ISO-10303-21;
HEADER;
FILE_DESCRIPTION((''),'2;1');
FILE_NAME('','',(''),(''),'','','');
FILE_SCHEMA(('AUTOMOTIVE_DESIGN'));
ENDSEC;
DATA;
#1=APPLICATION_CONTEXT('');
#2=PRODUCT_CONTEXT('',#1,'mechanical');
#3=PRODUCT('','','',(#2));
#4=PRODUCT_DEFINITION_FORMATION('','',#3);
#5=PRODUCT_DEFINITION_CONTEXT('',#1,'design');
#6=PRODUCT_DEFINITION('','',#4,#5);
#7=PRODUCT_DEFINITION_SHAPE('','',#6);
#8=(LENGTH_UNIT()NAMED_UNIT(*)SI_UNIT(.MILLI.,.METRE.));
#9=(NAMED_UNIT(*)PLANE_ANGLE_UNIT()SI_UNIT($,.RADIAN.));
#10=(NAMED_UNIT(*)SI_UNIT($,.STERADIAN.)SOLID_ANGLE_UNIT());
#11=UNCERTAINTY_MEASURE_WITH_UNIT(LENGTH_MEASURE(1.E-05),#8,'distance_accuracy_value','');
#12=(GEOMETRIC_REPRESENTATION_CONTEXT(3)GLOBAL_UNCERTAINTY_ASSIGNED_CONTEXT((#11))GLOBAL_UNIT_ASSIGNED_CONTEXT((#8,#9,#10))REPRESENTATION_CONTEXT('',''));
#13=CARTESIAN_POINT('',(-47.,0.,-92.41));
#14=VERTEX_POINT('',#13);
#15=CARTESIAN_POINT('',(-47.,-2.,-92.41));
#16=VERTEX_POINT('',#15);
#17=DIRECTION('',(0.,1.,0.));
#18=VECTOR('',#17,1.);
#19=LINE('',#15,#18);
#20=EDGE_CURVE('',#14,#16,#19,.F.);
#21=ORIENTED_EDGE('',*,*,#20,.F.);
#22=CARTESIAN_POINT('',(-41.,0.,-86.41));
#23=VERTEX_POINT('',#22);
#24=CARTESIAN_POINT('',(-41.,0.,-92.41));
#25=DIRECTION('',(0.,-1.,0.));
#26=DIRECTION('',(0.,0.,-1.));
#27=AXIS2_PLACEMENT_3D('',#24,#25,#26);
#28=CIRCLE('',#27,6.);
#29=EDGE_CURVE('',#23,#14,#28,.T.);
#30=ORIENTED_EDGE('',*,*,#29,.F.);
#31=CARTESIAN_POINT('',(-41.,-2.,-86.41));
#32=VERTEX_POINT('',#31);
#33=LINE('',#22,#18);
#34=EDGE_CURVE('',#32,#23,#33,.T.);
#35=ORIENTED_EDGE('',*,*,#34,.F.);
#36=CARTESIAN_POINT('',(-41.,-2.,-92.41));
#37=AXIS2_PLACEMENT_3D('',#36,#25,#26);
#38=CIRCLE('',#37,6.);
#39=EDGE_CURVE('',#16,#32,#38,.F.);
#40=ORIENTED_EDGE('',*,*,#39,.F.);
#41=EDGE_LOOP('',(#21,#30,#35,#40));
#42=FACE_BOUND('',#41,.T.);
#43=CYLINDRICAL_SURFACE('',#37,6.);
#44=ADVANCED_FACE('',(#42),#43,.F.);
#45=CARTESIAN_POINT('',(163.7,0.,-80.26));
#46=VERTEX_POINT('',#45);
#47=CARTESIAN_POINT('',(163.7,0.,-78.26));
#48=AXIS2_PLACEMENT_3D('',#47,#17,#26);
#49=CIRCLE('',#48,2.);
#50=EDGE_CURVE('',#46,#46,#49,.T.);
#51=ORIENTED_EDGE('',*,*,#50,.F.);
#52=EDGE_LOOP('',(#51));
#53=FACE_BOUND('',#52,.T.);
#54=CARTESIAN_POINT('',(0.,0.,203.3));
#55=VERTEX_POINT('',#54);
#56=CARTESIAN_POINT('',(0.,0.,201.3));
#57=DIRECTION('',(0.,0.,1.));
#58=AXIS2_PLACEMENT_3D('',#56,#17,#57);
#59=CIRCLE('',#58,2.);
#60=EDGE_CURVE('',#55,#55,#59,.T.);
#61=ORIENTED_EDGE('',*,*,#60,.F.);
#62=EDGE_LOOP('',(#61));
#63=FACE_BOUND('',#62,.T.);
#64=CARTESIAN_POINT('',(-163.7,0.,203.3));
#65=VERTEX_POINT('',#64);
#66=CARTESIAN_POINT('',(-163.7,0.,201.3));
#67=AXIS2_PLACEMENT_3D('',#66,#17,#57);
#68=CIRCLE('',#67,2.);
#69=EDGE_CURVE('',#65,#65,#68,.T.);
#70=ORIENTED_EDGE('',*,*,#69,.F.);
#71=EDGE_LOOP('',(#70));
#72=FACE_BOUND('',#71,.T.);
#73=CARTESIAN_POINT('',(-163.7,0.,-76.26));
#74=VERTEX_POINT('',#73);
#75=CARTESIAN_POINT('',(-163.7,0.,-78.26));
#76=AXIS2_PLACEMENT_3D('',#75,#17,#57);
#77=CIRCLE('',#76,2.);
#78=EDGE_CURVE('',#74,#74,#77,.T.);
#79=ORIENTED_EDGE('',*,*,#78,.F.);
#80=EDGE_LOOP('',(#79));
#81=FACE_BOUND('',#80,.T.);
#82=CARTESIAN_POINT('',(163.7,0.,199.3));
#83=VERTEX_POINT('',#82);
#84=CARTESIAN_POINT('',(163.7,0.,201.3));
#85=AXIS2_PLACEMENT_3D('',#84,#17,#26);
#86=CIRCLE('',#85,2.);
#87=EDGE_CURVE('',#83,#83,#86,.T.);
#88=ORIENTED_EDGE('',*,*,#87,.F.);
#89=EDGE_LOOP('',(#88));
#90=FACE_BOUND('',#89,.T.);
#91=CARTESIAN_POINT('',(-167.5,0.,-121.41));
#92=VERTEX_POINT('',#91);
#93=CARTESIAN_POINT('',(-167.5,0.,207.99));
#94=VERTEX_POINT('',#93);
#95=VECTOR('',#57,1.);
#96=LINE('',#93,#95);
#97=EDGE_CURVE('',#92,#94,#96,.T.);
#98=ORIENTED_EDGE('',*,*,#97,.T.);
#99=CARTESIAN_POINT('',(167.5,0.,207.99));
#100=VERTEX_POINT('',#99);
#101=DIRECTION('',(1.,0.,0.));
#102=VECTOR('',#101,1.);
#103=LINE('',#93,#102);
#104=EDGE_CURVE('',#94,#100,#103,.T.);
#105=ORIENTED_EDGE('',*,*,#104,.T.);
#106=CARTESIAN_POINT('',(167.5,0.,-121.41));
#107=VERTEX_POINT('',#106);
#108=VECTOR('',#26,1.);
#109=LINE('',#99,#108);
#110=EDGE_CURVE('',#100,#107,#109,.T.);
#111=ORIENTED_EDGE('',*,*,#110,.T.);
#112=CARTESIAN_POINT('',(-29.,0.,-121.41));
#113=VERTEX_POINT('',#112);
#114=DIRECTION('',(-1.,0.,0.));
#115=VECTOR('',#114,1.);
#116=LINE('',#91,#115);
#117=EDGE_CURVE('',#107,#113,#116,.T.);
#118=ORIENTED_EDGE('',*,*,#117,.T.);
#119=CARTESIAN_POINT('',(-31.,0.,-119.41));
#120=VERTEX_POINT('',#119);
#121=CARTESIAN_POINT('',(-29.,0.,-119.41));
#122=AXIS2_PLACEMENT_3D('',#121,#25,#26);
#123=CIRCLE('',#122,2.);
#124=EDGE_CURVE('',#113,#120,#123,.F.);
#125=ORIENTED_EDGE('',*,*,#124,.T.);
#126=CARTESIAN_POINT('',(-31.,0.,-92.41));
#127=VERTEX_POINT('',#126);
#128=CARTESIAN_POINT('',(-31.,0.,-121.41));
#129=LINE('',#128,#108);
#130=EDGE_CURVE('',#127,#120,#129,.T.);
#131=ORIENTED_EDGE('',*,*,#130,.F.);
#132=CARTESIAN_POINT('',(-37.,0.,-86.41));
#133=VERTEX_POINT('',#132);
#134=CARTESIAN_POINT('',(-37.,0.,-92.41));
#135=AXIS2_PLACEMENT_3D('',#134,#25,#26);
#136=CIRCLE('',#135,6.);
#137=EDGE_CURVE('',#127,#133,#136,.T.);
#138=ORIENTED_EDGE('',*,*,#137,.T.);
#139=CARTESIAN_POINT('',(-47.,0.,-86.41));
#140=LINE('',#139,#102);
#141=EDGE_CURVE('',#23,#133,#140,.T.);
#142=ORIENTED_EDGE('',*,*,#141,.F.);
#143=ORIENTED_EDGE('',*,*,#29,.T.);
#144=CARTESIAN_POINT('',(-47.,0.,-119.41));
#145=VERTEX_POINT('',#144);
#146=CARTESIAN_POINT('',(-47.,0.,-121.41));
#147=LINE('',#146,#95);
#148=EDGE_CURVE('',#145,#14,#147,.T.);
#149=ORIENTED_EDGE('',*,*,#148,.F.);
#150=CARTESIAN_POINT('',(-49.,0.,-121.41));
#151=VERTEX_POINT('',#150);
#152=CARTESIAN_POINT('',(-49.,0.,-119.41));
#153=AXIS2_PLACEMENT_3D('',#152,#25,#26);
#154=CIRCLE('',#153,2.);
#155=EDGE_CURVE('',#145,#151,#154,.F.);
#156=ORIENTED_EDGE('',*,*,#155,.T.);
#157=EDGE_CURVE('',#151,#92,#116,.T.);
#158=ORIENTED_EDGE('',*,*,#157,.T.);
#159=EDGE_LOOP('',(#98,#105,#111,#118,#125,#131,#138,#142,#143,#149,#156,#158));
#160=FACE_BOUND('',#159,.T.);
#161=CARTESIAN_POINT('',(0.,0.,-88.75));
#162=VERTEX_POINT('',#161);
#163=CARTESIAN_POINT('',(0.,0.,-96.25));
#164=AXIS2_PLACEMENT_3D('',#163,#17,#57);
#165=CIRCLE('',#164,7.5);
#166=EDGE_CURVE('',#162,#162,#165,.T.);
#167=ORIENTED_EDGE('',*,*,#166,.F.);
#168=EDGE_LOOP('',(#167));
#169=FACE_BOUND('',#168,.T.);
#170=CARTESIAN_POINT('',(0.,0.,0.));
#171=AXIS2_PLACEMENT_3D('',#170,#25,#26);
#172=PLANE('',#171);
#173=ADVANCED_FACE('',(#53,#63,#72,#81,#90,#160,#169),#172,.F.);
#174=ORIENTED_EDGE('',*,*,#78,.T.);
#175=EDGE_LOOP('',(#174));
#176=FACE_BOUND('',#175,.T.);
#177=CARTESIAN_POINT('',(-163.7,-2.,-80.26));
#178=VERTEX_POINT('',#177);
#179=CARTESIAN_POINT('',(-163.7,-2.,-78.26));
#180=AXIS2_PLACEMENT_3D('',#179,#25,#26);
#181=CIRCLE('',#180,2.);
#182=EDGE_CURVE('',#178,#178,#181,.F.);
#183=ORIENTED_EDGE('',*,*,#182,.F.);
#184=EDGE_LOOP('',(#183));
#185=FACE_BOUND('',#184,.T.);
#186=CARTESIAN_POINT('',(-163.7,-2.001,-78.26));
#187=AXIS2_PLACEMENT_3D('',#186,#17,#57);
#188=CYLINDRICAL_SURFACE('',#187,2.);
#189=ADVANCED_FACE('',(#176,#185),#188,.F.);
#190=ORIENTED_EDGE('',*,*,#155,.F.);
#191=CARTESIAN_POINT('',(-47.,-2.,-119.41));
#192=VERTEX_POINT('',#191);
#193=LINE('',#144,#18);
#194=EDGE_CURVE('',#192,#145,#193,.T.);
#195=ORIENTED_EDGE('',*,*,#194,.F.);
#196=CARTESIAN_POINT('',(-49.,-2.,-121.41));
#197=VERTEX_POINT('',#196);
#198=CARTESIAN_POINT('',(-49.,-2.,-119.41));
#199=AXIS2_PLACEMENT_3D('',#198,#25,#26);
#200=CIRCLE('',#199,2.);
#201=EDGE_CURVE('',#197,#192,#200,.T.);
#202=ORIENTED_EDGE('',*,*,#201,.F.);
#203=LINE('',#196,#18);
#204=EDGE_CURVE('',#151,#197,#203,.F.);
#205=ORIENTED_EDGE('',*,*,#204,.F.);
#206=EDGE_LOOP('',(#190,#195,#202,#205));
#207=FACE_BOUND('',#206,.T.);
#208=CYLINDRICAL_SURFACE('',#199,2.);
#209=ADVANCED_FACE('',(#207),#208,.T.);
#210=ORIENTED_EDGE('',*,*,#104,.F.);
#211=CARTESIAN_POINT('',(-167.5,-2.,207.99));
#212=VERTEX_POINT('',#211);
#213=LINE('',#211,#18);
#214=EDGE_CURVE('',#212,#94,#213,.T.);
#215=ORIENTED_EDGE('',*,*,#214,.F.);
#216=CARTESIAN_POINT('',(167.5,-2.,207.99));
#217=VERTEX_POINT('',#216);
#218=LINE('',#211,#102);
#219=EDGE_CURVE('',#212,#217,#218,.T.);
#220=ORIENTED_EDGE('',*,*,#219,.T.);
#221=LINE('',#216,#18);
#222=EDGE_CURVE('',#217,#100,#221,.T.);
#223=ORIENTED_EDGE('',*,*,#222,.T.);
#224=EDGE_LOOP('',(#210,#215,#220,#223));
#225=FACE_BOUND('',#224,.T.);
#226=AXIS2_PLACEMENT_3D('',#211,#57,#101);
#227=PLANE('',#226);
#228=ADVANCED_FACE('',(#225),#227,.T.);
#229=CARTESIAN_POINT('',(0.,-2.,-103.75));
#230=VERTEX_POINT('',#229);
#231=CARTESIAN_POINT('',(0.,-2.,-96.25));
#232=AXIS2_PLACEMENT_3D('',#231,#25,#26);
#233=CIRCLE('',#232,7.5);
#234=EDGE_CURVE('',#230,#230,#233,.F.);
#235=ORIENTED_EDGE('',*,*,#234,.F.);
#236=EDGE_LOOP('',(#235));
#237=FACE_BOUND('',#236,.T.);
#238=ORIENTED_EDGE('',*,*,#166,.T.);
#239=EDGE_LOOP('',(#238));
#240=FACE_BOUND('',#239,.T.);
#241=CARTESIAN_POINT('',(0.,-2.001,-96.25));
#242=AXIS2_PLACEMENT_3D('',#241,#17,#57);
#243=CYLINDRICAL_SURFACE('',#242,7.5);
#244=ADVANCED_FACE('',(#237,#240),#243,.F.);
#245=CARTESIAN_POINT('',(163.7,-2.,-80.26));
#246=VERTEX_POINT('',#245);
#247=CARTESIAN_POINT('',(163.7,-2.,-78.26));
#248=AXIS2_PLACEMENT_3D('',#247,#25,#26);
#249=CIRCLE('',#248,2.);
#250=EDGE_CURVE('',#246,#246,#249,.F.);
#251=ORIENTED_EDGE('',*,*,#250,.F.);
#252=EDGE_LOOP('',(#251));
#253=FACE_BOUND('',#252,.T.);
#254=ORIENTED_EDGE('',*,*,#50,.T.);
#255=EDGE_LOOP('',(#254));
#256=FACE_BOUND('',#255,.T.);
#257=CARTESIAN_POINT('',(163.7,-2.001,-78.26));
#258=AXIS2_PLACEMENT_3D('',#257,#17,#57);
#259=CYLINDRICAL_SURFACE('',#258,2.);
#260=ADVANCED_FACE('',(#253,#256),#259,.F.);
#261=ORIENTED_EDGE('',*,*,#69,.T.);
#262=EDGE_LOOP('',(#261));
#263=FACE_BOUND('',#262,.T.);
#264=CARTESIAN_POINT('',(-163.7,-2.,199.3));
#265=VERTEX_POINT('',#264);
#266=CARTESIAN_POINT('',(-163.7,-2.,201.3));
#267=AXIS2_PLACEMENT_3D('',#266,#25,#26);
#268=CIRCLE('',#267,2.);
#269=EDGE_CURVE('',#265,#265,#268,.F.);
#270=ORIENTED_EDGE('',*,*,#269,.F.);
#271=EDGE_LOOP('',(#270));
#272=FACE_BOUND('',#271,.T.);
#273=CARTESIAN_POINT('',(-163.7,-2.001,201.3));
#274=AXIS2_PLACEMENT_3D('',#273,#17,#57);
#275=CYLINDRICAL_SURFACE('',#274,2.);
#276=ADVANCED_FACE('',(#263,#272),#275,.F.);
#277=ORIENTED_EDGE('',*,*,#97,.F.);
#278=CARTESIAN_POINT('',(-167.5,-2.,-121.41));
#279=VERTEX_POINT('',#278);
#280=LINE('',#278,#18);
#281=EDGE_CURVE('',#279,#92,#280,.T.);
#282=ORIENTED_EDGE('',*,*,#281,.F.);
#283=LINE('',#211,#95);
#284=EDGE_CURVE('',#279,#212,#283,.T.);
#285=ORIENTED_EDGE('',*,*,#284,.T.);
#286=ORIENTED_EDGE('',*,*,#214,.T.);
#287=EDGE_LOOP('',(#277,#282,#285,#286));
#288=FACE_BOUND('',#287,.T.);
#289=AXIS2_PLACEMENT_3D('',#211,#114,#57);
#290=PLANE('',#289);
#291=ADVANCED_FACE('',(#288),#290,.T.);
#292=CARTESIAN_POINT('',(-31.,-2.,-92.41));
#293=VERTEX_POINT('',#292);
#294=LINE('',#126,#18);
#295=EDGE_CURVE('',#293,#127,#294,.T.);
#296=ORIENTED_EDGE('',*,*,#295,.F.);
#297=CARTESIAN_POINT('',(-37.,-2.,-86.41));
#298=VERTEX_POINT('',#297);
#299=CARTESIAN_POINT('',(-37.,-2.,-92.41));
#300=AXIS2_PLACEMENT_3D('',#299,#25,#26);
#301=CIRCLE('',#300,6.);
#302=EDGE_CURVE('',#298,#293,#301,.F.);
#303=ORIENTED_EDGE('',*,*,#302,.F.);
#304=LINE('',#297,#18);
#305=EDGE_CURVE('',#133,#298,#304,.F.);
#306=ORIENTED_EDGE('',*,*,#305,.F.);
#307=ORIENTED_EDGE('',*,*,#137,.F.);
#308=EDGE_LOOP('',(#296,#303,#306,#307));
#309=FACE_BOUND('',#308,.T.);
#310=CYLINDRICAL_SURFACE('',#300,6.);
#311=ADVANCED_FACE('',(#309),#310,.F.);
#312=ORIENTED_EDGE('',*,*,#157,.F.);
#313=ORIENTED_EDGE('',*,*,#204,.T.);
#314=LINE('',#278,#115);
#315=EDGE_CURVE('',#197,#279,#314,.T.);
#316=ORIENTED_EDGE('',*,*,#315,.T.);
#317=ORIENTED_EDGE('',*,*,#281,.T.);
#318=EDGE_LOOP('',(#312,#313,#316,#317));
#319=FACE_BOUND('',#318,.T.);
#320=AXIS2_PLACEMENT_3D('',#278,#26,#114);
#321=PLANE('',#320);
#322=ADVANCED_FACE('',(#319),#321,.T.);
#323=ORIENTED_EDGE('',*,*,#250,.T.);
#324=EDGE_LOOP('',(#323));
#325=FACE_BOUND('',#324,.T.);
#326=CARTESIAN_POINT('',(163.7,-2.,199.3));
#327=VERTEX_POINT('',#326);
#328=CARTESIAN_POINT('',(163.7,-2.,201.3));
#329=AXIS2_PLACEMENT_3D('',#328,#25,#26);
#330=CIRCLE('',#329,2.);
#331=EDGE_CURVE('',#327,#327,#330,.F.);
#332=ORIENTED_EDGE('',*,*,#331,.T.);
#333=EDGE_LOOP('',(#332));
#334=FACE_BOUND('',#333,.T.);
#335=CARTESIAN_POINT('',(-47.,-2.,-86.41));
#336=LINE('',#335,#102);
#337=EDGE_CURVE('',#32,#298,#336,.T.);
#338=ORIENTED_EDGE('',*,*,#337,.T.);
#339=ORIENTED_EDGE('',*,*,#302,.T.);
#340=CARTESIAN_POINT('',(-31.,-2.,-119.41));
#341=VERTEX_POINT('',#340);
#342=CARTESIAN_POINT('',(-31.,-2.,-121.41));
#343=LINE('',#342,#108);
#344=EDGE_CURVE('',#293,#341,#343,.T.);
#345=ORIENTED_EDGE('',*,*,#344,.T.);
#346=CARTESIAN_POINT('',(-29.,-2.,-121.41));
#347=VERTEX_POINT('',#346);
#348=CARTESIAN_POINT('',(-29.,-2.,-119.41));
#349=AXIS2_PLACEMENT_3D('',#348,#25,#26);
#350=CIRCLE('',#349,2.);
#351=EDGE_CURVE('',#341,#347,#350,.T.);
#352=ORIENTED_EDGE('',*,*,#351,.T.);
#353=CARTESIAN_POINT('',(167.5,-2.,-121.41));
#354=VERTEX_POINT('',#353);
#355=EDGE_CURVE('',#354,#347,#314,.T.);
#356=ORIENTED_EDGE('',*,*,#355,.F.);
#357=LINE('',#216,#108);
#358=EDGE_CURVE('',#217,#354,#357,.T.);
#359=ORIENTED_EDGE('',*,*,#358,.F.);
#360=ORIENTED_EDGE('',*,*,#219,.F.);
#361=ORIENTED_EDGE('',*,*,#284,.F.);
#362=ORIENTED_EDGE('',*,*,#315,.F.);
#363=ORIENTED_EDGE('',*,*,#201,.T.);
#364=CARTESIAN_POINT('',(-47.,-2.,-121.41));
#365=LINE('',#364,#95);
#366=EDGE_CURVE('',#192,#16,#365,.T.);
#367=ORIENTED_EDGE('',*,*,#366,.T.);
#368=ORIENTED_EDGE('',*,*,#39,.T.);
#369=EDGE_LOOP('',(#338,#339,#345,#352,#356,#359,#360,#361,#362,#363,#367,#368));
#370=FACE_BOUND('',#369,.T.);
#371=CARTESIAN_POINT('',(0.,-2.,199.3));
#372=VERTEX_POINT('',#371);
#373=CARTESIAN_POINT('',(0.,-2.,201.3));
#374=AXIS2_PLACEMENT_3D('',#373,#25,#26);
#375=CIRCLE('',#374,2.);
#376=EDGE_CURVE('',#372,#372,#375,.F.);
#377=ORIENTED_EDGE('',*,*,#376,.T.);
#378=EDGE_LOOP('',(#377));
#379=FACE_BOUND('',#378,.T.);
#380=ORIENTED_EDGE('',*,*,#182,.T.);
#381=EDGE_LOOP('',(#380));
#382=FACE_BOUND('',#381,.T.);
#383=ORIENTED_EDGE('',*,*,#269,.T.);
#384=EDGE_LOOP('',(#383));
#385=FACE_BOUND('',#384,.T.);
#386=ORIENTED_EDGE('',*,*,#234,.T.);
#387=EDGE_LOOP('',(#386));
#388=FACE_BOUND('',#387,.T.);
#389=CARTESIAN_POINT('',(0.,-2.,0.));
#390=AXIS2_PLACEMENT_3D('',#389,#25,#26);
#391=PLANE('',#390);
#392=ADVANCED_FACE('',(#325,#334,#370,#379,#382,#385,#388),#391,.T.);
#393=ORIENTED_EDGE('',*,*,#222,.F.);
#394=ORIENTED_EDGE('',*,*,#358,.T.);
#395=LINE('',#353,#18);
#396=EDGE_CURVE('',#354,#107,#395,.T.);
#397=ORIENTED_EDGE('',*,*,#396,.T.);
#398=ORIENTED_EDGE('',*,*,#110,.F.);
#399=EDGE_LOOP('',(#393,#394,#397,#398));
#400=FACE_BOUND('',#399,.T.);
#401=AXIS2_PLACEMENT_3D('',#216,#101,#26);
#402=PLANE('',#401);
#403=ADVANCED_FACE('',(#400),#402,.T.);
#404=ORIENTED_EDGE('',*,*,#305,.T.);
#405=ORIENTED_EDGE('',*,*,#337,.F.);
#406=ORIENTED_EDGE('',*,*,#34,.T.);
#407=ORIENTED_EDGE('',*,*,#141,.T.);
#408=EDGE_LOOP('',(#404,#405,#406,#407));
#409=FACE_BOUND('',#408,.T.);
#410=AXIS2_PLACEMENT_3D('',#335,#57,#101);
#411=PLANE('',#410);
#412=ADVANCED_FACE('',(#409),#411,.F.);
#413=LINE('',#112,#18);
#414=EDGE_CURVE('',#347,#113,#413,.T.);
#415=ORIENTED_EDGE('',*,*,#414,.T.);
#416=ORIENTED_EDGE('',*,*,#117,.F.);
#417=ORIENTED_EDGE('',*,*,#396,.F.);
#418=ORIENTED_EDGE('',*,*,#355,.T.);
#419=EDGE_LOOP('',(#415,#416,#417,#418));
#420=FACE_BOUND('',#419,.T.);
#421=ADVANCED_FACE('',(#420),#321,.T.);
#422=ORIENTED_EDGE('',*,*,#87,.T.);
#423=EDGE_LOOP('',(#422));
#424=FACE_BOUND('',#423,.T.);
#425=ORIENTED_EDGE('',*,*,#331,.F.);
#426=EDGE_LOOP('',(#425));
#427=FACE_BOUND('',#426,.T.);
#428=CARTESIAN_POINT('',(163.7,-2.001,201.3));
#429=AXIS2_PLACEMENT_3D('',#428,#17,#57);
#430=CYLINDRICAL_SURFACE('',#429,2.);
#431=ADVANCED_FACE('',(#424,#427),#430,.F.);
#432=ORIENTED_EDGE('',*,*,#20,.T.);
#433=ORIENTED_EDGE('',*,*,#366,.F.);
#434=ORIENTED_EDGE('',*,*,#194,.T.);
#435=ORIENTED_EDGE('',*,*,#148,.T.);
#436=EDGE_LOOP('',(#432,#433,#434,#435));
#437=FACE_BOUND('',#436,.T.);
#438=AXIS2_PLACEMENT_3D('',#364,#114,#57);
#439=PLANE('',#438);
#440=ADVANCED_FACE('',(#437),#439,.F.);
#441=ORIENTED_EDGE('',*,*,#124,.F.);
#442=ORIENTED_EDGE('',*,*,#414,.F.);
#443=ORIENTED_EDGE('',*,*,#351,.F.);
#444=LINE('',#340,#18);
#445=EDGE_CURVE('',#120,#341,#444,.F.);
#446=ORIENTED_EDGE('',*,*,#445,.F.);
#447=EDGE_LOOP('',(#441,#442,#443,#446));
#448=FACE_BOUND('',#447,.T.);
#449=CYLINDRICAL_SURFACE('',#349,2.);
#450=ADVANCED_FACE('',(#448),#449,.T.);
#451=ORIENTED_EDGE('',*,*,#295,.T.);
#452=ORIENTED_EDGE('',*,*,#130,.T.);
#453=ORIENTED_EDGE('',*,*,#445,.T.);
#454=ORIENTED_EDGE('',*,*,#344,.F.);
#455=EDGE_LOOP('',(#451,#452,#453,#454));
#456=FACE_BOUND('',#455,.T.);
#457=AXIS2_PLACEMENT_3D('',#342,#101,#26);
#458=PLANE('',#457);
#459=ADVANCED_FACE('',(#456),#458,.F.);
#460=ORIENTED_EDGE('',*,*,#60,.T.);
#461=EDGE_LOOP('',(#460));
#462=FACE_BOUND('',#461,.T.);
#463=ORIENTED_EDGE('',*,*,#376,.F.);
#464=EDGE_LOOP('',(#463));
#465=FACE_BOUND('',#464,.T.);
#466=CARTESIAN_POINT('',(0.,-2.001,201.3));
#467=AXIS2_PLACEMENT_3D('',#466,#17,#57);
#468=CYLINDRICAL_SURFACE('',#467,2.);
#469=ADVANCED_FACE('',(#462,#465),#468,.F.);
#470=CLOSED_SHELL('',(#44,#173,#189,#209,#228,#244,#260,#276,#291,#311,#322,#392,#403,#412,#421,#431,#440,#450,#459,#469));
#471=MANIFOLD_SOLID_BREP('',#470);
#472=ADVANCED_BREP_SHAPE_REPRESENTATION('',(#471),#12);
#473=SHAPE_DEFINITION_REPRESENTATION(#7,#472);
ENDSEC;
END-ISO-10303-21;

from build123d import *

# Parameters (mm, degrees)
CROQUIS12_W           = 335
CROQUIS12_H           = 329.4
BRIDA_BASE2_DEPTH     = 2
CORTAR_EXTRUIR6_REACH = 269.058
CROQUIS27_R           = 2
CORTAR_EXTRUIR7_REACH = 269.058
CROQUIS28_R           = 7.5
CROQUIS29_W           = 16
CROQUIS29_H           = 35
CORTAR_EXTRUIR8_DEPTH = 268.058214815
REDONDEO1_R           = 6
REDONDEO2_R           = 2


# Sheet-metal steps are written as plain solids
with BuildPart() as part:
    # Croquis12 → Brida base2 (new body)
    with BuildSketch(Plane(origin=(0, 0, 0), x_dir=(1, 0, 0), z_dir=(0, 1, 0))):
        with Locations((0, -43.29)):
            Rectangle(CROQUIS12_W, CROQUIS12_H)
    extrude(amount=-BRIDA_BASE2_DEPTH)

    # Croquis27 → Cortar-Extruir6 (cut, up to next)
    with BuildSketch(Plane(origin=(0, 0, 0), x_dir=(1, 0, 0), z_dir=(0, 1, 0)), mode=Mode.PRIVATE) as cortar_extruir6_sk1:
        with Locations(Location((-163.7, -201.3, 0), (0, 0, 270))):
            Circle(CROQUIS27_R)
    cortar_extruir6_tool1 = extrude(cortar_extruir6_sk1.sketch, amount=-CORTAR_EXTRUIR6_REACH, mode=Mode.PRIVATE) & part.part
    # Croquis27 → Cortar-Extruir6 (cut, up to next)
    with BuildSketch(Plane(origin=(0, 0, 0), x_dir=(1, 0, 0), z_dir=(0, 1, 0)), mode=Mode.PRIVATE) as cortar_extruir6_sk2:
        with Locations(Location((-163.7, 78.26, 0), (0, 0, 270))):
            Circle(CROQUIS27_R)
    cortar_extruir6_tool2 = extrude(cortar_extruir6_sk2.sketch, amount=-CORTAR_EXTRUIR6_REACH, mode=Mode.PRIVATE) & part.part
    # Croquis27 → Cortar-Extruir6 (cut, up to next)
    with BuildSketch(Plane(origin=(0, 0, 0), x_dir=(1, 0, 0), z_dir=(0, 1, 0)), mode=Mode.PRIVATE) as cortar_extruir6_sk3:
        with Locations(Location((163.7, 78.26, 0), (0, 0, 90))):
            Circle(CROQUIS27_R)
    cortar_extruir6_tool3 = extrude(cortar_extruir6_sk3.sketch, amount=-CORTAR_EXTRUIR6_REACH, mode=Mode.PRIVATE) & part.part
    # Croquis27 → Cortar-Extruir6 (cut, up to next)
    with BuildSketch(Plane(origin=(0, 0, 0), x_dir=(1, 0, 0), z_dir=(0, 1, 0)), mode=Mode.PRIVATE) as cortar_extruir6_sk4:
        with Locations(Location((163.7, -201.3, 0), (0, 0, 90))):
            Circle(CROQUIS27_R)
    cortar_extruir6_tool4 = extrude(cortar_extruir6_sk4.sketch, amount=-CORTAR_EXTRUIR6_REACH, mode=Mode.PRIVATE) & part.part
    # Croquis27 → Cortar-Extruir6 (cut, up to next)
    with BuildSketch(Plane(origin=(0, 0, 0), x_dir=(1, 0, 0), z_dir=(0, 1, 0)), mode=Mode.PRIVATE) as cortar_extruir6_sk5:
        with Locations(Location((0, -201.3, 0), (0, 0, 270))):
            Circle(CROQUIS27_R)
    cortar_extruir6_tool5 = extrude(cortar_extruir6_sk5.sketch, amount=-CORTAR_EXTRUIR6_REACH, mode=Mode.PRIVATE) & part.part
    add(cortar_extruir6_tool1.solids().sort_by_distance((-163.7, 0, 201.3))[0], mode=Mode.SUBTRACT)
    add(cortar_extruir6_tool2.solids().sort_by_distance((-163.7, 0, -78.26))[0], mode=Mode.SUBTRACT)
    add(cortar_extruir6_tool3.solids().sort_by_distance((163.7, 0, -78.26))[0], mode=Mode.SUBTRACT)
    add(cortar_extruir6_tool4.solids().sort_by_distance((163.7, 0, 201.3))[0], mode=Mode.SUBTRACT)
    add(cortar_extruir6_tool5.solids().sort_by_distance((0, 0, 201.3))[0], mode=Mode.SUBTRACT)

    # Croquis28 → Cortar-Extruir7 (cut, up to next)
    with BuildSketch(Plane(origin=(0, 0, 0), x_dir=(1, 0, 0), z_dir=(0, 1, 0)), mode=Mode.PRIVATE) as cortar_extruir7_sk1:
        with Locations(Location((0, 96.25, 0), (0, 0, 270))):
            Circle(CROQUIS28_R)
    cortar_extruir7_tool1 = extrude(cortar_extruir7_sk1.sketch, amount=-CORTAR_EXTRUIR7_REACH, mode=Mode.PRIVATE) & part.part
    add(cortar_extruir7_tool1.solids().sort_by_distance((0, 0, -96.25))[0], mode=Mode.SUBTRACT)

    # Croquis29 → Cortar-Extruir8 (cut, through all)
    with BuildSketch(Plane(origin=(0, 0, 0), x_dir=(1, 0, 0), z_dir=(0, 1, 0))):
        with Locations((-39, 103.91)):
            Rectangle(CROQUIS29_W, CROQUIS29_H)
    extrude(amount=-CORTAR_EXTRUIR8_DEPTH, mode=Mode.SUBTRACT)

    # Redondeo1
    redondeo1_edges = [part.edges().sort_by_distance(p)[0] for p in [
        (-47, -1, -86.41),
        (-31, -1, -86.41),
    ]]
    fillet(redondeo1_edges, radius=REDONDEO1_R)

    # Redondeo2
    redondeo2_edges = [part.edges().sort_by_distance(p)[0] for p in [
        (-47, -1, -121.41),
        (-31, -1, -121.41),
    ]]
    fillet(redondeo2_edges, radius=REDONDEO2_R)


solid = part.part
